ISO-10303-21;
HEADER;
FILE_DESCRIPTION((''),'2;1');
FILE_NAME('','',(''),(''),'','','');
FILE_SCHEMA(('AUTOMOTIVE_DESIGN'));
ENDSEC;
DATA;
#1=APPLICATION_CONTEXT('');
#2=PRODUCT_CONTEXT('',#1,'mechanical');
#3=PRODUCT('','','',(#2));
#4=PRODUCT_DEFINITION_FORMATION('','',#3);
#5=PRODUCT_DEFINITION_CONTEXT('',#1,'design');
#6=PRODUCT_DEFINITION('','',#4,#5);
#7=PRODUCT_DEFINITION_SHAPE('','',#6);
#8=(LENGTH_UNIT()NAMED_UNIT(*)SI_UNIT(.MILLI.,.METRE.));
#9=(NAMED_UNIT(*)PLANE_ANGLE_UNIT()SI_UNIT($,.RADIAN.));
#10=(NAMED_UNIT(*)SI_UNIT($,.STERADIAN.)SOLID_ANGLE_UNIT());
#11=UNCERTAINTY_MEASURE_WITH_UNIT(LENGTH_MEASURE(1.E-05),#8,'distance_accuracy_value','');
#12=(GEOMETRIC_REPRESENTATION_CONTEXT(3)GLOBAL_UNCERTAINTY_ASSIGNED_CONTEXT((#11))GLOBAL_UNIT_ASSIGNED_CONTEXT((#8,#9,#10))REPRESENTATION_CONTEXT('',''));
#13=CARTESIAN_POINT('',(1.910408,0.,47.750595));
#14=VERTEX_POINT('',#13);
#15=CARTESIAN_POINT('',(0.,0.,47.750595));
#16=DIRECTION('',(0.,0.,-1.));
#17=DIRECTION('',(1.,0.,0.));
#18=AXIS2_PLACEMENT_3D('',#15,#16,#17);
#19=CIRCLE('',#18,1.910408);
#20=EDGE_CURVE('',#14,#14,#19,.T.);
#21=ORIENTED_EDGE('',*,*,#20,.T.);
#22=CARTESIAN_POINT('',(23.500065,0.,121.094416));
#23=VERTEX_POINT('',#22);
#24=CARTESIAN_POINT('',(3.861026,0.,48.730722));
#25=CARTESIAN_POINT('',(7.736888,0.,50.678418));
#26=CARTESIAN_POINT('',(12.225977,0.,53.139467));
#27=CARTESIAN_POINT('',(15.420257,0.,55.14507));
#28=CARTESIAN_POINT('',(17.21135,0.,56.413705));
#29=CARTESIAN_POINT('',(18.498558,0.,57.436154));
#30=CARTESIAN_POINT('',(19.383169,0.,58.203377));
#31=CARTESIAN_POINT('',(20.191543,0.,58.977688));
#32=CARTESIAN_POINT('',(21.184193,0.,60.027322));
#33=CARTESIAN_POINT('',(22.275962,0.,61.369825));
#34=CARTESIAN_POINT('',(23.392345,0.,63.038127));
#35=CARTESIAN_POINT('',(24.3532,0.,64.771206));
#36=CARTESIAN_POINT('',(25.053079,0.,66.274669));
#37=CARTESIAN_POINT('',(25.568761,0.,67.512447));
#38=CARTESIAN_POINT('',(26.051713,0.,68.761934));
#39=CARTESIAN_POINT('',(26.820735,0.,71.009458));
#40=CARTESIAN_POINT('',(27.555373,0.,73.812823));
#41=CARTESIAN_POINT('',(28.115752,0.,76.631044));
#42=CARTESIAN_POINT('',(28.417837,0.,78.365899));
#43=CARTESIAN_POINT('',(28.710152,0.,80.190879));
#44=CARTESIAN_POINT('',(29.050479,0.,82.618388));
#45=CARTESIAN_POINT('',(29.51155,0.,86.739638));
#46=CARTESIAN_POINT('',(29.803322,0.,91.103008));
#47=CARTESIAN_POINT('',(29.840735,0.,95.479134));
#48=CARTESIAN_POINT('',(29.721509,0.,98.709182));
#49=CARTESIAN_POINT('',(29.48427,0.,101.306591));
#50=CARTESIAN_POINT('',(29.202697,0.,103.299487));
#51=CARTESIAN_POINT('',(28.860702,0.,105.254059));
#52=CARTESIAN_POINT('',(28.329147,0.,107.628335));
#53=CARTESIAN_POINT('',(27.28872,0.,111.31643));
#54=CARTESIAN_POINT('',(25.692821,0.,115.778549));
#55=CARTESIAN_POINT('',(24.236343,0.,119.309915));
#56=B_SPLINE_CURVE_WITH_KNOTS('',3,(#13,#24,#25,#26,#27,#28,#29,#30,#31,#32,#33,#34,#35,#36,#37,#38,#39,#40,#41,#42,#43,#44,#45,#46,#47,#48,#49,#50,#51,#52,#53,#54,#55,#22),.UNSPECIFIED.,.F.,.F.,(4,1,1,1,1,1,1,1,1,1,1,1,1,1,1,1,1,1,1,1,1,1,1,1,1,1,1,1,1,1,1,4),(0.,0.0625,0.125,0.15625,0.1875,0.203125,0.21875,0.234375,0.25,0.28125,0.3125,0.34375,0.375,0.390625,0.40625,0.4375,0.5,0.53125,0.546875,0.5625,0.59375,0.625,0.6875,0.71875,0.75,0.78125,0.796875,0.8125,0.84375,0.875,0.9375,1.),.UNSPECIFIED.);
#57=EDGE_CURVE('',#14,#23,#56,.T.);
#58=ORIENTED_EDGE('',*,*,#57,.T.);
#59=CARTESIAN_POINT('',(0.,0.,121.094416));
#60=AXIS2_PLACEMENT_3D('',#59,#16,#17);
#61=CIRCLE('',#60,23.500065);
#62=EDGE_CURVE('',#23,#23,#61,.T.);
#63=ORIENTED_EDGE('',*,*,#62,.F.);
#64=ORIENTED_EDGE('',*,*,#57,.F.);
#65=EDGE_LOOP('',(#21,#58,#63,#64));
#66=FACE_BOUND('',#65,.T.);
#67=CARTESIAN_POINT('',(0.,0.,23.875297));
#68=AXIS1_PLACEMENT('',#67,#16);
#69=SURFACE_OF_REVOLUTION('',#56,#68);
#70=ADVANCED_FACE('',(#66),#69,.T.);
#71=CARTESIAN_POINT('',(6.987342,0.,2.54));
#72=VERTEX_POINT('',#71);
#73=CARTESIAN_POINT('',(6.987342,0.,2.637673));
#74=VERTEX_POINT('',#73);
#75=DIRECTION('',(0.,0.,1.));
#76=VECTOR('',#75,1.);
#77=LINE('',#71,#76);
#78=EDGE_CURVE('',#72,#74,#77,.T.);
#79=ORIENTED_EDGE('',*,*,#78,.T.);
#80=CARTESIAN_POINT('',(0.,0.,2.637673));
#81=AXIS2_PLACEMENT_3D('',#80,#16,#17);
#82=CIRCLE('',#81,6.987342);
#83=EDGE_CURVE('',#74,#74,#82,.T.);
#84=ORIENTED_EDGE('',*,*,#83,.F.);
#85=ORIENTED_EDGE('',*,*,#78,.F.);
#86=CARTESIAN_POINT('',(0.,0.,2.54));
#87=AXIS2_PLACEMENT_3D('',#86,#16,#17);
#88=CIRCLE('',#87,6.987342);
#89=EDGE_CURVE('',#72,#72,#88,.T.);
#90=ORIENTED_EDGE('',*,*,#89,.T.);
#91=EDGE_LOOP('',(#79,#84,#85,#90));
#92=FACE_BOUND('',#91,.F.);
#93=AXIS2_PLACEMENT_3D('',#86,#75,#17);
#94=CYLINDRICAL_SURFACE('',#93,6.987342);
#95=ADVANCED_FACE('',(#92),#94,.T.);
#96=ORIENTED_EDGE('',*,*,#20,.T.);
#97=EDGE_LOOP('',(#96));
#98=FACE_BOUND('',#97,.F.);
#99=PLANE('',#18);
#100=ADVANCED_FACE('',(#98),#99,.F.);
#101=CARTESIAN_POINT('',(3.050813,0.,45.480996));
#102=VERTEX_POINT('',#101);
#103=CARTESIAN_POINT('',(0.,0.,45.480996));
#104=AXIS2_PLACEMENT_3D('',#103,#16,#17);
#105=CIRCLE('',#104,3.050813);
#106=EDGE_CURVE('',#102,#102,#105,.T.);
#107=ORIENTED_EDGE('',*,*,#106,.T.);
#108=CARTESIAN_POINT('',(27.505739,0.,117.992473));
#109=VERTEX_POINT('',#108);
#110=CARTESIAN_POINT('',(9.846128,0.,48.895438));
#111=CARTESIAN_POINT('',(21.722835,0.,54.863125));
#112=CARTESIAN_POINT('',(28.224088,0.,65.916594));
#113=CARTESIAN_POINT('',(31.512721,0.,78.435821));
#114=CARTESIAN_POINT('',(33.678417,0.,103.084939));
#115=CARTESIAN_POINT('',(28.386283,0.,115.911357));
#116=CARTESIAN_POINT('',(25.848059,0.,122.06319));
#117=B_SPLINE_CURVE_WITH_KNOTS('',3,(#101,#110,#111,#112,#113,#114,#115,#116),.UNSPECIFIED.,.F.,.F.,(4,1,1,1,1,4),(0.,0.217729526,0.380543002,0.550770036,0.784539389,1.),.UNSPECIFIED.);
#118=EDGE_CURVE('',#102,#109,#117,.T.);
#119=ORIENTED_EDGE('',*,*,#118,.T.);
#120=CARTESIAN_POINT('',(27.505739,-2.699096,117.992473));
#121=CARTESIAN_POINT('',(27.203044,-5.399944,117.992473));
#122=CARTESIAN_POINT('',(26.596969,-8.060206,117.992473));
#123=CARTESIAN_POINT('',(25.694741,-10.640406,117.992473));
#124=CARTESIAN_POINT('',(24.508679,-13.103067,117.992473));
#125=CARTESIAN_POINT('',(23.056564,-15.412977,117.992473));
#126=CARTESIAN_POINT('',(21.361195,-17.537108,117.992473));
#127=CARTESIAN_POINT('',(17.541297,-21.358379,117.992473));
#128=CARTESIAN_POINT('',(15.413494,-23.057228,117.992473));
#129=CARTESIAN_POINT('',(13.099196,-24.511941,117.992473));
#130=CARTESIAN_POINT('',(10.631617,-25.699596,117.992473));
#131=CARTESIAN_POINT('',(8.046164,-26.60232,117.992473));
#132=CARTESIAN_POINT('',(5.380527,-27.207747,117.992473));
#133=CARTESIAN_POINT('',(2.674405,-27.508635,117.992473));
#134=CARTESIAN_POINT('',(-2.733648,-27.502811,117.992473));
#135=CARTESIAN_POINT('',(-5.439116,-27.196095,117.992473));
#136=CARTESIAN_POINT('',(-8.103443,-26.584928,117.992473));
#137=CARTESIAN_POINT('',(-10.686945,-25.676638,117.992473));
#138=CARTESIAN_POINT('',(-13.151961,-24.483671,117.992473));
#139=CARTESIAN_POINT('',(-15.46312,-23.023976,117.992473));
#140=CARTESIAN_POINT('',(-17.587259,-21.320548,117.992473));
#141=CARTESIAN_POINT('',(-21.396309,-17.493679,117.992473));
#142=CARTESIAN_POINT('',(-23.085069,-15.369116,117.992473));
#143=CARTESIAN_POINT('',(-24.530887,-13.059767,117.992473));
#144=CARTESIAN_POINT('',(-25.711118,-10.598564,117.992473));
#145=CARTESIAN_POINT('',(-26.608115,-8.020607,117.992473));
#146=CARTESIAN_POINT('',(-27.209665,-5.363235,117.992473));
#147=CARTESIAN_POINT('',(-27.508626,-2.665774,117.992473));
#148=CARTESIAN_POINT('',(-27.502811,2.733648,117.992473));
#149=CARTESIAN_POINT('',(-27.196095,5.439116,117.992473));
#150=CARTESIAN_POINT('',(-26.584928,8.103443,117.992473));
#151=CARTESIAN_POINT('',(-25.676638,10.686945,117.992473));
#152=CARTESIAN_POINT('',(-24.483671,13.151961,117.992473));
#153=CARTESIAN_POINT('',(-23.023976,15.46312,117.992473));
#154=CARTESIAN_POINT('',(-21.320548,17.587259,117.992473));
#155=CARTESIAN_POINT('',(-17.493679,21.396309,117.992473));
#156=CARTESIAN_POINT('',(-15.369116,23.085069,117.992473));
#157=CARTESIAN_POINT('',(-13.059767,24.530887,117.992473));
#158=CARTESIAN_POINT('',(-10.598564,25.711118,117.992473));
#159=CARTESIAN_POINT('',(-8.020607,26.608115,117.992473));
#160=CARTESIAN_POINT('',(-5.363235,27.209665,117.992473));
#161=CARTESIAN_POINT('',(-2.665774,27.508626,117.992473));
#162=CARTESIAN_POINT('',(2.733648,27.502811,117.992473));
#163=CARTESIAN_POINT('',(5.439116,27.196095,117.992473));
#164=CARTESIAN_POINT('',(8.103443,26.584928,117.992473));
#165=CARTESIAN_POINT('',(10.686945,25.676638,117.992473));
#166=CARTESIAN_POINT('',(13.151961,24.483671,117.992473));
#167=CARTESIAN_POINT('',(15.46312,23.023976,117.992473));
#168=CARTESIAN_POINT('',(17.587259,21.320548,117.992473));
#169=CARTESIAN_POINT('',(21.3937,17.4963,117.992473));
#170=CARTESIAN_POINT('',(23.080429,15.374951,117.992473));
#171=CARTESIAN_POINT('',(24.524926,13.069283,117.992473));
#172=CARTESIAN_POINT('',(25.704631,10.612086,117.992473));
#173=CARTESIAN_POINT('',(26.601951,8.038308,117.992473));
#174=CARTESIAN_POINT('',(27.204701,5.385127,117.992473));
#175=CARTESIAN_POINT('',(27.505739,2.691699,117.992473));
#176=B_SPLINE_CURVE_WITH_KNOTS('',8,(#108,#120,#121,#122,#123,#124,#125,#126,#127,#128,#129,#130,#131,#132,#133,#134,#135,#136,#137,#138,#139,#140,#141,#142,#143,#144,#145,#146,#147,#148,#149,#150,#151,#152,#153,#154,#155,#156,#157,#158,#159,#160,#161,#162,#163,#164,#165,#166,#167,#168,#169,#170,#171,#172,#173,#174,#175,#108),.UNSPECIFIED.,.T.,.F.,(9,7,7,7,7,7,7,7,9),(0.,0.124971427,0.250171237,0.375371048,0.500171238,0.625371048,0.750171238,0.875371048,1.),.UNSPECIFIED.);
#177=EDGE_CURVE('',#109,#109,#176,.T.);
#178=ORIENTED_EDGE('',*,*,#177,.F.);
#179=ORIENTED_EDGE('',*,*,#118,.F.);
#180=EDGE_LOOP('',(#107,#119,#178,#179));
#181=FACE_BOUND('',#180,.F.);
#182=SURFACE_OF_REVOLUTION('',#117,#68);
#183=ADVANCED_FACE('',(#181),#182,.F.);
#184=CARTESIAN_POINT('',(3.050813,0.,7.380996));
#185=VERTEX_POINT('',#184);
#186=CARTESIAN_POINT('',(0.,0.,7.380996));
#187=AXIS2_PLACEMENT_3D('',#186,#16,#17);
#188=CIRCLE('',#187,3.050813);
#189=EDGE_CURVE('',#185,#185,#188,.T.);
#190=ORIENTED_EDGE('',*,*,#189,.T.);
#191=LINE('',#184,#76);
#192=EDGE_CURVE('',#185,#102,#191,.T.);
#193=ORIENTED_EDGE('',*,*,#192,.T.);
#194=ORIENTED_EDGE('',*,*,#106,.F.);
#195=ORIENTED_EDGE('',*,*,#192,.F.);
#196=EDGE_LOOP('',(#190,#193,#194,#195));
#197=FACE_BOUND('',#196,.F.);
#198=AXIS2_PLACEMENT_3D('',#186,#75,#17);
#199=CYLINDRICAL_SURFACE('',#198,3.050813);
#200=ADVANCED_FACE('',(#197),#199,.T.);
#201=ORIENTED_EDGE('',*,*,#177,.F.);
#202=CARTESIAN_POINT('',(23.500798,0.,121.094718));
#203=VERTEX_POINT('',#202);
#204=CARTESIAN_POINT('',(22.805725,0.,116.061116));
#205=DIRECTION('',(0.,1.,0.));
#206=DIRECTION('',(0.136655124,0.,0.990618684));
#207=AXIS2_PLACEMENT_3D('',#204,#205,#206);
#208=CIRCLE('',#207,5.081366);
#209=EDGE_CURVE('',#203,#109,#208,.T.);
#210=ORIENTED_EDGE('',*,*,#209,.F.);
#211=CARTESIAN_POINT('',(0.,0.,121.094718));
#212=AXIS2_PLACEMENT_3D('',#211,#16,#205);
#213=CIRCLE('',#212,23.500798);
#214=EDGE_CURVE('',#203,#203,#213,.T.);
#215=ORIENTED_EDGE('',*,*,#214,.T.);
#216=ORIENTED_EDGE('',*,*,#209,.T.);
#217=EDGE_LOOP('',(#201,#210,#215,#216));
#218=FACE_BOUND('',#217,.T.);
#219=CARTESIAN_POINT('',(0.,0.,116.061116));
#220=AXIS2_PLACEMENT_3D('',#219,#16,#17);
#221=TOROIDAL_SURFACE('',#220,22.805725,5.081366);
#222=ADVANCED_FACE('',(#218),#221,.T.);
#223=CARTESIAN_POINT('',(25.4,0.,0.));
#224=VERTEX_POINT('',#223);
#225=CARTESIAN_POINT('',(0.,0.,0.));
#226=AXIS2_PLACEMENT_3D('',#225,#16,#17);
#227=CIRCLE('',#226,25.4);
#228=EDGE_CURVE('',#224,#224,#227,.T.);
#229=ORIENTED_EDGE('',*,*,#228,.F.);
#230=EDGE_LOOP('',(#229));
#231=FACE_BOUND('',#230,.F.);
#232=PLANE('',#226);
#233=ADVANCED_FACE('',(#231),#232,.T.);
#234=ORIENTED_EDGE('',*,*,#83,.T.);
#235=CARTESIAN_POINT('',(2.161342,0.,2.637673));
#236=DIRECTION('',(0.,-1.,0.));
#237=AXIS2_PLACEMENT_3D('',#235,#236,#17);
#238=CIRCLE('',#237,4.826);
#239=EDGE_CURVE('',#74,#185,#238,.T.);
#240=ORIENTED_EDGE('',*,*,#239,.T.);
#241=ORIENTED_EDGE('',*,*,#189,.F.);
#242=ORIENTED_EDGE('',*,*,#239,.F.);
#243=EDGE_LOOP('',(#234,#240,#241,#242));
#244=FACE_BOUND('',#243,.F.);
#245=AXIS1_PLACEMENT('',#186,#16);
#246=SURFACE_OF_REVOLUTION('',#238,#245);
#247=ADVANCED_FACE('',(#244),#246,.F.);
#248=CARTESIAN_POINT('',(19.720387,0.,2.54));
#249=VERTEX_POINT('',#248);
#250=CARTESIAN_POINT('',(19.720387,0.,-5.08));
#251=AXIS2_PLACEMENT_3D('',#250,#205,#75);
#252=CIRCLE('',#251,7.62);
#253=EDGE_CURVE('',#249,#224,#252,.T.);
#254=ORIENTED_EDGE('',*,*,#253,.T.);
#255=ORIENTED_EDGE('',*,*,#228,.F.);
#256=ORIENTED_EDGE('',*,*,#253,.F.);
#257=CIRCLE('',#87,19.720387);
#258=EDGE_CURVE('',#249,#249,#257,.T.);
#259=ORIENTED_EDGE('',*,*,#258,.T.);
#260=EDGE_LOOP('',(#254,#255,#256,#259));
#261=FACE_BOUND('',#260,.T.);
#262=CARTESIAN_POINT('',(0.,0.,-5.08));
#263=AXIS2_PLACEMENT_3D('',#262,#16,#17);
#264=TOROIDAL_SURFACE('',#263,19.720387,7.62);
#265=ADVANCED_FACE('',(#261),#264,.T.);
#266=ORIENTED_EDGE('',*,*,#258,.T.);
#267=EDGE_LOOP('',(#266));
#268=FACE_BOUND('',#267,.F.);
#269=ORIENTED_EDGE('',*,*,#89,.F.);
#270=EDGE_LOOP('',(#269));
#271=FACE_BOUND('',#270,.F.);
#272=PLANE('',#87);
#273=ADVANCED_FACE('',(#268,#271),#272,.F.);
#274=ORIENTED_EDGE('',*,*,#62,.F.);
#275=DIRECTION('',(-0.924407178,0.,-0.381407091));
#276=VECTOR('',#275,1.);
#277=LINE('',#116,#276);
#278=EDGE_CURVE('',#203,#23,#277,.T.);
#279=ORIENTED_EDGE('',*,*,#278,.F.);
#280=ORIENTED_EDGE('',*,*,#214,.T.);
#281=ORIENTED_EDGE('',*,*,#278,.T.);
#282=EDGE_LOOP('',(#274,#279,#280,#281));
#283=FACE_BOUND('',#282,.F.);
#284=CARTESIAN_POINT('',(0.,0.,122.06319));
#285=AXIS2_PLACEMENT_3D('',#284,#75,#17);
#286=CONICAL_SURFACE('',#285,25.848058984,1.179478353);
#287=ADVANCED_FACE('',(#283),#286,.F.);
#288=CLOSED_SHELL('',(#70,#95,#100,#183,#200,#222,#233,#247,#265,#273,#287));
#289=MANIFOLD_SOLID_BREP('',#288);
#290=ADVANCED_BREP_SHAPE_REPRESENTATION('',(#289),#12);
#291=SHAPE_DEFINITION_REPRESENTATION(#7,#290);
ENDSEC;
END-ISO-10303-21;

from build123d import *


# Not quite as in the source:
# - a fillet or chamfer that OpenCascade refuses, or shapes differently, is made with other operations: its cross-section is extruded or revolved along the edge and cut away or added
# - the dataset's text gives a spline's control points without its knots; the knots are read off the source's solid


with BuildPart() as f1:
    # F0 (on Front) → F1 (revolve)
    with BuildSketch(Plane.XZ):
        with BuildLine():
            Line((0, 47.7505947651), (0, 0))
            Line((0, 0), (25.4, 0))
            Line((25.4, 0), (25.4, 2.54))
            Line((25.4, 2.54), (6.9873421453, 2.54))
            Line((6.9873421453, 2.54), (6.9873421453, 7.3809963651))
            Line((6.9873421453, 7.3809963651), (3.0508127529, 7.3809963651))
            Line((3.0508127529, 7.3809963651), (3.0508127529, 45.4809963651))
            add(Edge.make_bspline(
                [(3.0508127529, 45.4809963651), (9.8461281639, 48.8954375707), (21.7228349186, 54.8631247901), (28.2240876429, 65.9165943611), (31.5127213678, 78.4358206865), (33.6784171743, 103.0849392109), (28.386283274, 115.9113566716), (25.8480589837, 122.0631897449)],
                knots=[0, 0, 0, 0, 0.2177295257, 0.3805430023, 0.5507700364, 0.7845393886, 1, 1, 1, 1], degree=3))
            Line((25.8480589837, 122.0631897449), (23.5000647508, 121.0944157349))
            add(Edge.make_bspline(
                [(1.9104079551, 47.7505947651), (3.8610263285, 48.7307217125), (7.7368881371, 50.6784180709), (12.2259767295, 53.1394673421), (15.4202565252, 55.1450698166), (17.2113496311, 56.4137046376), (18.4985579441, 57.4361542965), (19.3831690783, 58.2033768453), (20.1915430594, 58.9776879327), (21.1841928439, 60.0273218326), (22.2759624919, 61.3698248404), (23.392344712, 63.0381272524), (24.353200167, 64.7712061983), (25.0530786649, 66.2746693843), (25.5687607147, 67.5124472772), (26.0517126553, 68.761934225), (26.8207352465, 71.0094584469), (27.5553728133, 73.8128228874), (28.1157522153, 76.6310441845), (28.4178367466, 78.3658990039), (28.7101517328, 80.190879424), (29.0504794951, 82.6183883543), (29.5115503692, 86.7396383327), (29.8033217447, 91.1030083431), (29.8407350232, 95.4791342687), (29.7215088128, 98.7091824899), (29.4842699418, 101.3065910758), (29.202697145, 103.2994868111), (28.8607016819, 105.2540587373), (28.3291470633, 107.6283352293), (27.2887198112, 111.3164298649), (25.6928207945, 115.7785494719), (24.236343262, 119.3099152425), (23.5000647508, 121.0944157349)],
                knots=[4e-10, 4e-10, 4e-10, 4e-10, 0.0625000004, 0.1250000003, 0.1562500003, 0.1875000003, 0.2031250003, 0.2187500003, 0.2343750003, 0.2500000003, 0.2812500003, 0.3125000003, 0.3437500003, 0.3750000002, 0.3906250002, 0.4062500002, 0.4375000002, 0.5000000002, 0.5312500002, 0.5468750002, 0.5625000002, 0.5937500002, 0.6250000001, 0.6875000001, 0.7187500001, 0.7500000001, 0.7812500001, 0.7968750001, 0.8125000001, 0.8437500001, 0.875, 0.9375, 1, 1, 1, 1], degree=3))
            Line((1.9104079551, 47.7505947651), (0, 47.7505947651))
        make_face()
    revolve(axis=Axis((0, 0, 23.8752973825), (0, 0, -1)))

    # F2: fillet of radius 4.826 on 1 edges, made by hand

    # F2_s1 → F2_t2 (revolve, cut)
    with BuildSketch(Plane.XZ):
        with BuildLine():
            ThreePointArc((6.9873421453, 2.6376728427), (5.8750236847, 5.7196925415), (3.0508127529, 7.3809963651))
            Line((3.0508127529, 7.3809963651), (6.9873421453, 7.3809963651))
            Line((6.9873421453, 7.3809963651), (6.9873421453, 2.6376728427))
        make_face()
    revolve(axis=Axis((0, 0, 7.3809963651), (0, 0, -1)), mode=Mode.SUBTRACT)

    # F3: fillet of radius 7.62 on 1 edges, made by hand

    # F3_s1 → F3_t2 (revolve, cut)
    with BuildSketch(Plane.XZ):
        with BuildLine():
            ThreePointArc((19.7203873372, 2.54), (22.8312393105, 1.8760764803), (25.4, 0))
            Line((25.4, 0), (25.4, 2.54))
            Line((25.4, 2.54), (19.7203873372, 2.54))
        make_face()
    revolve(axis=Axis((0, 0, 2.54), (0, 0, -1)), mode=Mode.SUBTRACT)

    # F4: fillet of radius 5.08 on 1 edges, made by hand

    # F4_s1 → F4_t2 (revolve, cut)
    with BuildSketch(Plane.XZ):
        with BuildLine():
            ThreePointArc((23.5001194129, 121.0948119824), (25.9427148586, 120.0585616678), (27.5299870338, 117.93237864))
            Line((27.5299870338, 117.93237864), (28.0024132618, 118.1195048845))
            ThreePointArc((28.0024132618, 118.1195048845), (27.1665806291, 120.1928354079), (26.3177840752, 122.2569966352))
            Line((26.3177840752, 122.2569966352), (25.6542520935, 122.5329148365))
            ThreePointArc((25.6542520935, 122.5329148365), (24.4803481858, 122.048566289), (23.5695588788, 121.5981815612))
            Line((23.5695588788, 121.5981815612), (23.5001194129, 121.0948119824))
        make_face()
    revolve(axis=Axis((0, 0, 122.0631897449), (0, 0, -1)), mode=Mode.SUBTRACT)


solid = f1.part
